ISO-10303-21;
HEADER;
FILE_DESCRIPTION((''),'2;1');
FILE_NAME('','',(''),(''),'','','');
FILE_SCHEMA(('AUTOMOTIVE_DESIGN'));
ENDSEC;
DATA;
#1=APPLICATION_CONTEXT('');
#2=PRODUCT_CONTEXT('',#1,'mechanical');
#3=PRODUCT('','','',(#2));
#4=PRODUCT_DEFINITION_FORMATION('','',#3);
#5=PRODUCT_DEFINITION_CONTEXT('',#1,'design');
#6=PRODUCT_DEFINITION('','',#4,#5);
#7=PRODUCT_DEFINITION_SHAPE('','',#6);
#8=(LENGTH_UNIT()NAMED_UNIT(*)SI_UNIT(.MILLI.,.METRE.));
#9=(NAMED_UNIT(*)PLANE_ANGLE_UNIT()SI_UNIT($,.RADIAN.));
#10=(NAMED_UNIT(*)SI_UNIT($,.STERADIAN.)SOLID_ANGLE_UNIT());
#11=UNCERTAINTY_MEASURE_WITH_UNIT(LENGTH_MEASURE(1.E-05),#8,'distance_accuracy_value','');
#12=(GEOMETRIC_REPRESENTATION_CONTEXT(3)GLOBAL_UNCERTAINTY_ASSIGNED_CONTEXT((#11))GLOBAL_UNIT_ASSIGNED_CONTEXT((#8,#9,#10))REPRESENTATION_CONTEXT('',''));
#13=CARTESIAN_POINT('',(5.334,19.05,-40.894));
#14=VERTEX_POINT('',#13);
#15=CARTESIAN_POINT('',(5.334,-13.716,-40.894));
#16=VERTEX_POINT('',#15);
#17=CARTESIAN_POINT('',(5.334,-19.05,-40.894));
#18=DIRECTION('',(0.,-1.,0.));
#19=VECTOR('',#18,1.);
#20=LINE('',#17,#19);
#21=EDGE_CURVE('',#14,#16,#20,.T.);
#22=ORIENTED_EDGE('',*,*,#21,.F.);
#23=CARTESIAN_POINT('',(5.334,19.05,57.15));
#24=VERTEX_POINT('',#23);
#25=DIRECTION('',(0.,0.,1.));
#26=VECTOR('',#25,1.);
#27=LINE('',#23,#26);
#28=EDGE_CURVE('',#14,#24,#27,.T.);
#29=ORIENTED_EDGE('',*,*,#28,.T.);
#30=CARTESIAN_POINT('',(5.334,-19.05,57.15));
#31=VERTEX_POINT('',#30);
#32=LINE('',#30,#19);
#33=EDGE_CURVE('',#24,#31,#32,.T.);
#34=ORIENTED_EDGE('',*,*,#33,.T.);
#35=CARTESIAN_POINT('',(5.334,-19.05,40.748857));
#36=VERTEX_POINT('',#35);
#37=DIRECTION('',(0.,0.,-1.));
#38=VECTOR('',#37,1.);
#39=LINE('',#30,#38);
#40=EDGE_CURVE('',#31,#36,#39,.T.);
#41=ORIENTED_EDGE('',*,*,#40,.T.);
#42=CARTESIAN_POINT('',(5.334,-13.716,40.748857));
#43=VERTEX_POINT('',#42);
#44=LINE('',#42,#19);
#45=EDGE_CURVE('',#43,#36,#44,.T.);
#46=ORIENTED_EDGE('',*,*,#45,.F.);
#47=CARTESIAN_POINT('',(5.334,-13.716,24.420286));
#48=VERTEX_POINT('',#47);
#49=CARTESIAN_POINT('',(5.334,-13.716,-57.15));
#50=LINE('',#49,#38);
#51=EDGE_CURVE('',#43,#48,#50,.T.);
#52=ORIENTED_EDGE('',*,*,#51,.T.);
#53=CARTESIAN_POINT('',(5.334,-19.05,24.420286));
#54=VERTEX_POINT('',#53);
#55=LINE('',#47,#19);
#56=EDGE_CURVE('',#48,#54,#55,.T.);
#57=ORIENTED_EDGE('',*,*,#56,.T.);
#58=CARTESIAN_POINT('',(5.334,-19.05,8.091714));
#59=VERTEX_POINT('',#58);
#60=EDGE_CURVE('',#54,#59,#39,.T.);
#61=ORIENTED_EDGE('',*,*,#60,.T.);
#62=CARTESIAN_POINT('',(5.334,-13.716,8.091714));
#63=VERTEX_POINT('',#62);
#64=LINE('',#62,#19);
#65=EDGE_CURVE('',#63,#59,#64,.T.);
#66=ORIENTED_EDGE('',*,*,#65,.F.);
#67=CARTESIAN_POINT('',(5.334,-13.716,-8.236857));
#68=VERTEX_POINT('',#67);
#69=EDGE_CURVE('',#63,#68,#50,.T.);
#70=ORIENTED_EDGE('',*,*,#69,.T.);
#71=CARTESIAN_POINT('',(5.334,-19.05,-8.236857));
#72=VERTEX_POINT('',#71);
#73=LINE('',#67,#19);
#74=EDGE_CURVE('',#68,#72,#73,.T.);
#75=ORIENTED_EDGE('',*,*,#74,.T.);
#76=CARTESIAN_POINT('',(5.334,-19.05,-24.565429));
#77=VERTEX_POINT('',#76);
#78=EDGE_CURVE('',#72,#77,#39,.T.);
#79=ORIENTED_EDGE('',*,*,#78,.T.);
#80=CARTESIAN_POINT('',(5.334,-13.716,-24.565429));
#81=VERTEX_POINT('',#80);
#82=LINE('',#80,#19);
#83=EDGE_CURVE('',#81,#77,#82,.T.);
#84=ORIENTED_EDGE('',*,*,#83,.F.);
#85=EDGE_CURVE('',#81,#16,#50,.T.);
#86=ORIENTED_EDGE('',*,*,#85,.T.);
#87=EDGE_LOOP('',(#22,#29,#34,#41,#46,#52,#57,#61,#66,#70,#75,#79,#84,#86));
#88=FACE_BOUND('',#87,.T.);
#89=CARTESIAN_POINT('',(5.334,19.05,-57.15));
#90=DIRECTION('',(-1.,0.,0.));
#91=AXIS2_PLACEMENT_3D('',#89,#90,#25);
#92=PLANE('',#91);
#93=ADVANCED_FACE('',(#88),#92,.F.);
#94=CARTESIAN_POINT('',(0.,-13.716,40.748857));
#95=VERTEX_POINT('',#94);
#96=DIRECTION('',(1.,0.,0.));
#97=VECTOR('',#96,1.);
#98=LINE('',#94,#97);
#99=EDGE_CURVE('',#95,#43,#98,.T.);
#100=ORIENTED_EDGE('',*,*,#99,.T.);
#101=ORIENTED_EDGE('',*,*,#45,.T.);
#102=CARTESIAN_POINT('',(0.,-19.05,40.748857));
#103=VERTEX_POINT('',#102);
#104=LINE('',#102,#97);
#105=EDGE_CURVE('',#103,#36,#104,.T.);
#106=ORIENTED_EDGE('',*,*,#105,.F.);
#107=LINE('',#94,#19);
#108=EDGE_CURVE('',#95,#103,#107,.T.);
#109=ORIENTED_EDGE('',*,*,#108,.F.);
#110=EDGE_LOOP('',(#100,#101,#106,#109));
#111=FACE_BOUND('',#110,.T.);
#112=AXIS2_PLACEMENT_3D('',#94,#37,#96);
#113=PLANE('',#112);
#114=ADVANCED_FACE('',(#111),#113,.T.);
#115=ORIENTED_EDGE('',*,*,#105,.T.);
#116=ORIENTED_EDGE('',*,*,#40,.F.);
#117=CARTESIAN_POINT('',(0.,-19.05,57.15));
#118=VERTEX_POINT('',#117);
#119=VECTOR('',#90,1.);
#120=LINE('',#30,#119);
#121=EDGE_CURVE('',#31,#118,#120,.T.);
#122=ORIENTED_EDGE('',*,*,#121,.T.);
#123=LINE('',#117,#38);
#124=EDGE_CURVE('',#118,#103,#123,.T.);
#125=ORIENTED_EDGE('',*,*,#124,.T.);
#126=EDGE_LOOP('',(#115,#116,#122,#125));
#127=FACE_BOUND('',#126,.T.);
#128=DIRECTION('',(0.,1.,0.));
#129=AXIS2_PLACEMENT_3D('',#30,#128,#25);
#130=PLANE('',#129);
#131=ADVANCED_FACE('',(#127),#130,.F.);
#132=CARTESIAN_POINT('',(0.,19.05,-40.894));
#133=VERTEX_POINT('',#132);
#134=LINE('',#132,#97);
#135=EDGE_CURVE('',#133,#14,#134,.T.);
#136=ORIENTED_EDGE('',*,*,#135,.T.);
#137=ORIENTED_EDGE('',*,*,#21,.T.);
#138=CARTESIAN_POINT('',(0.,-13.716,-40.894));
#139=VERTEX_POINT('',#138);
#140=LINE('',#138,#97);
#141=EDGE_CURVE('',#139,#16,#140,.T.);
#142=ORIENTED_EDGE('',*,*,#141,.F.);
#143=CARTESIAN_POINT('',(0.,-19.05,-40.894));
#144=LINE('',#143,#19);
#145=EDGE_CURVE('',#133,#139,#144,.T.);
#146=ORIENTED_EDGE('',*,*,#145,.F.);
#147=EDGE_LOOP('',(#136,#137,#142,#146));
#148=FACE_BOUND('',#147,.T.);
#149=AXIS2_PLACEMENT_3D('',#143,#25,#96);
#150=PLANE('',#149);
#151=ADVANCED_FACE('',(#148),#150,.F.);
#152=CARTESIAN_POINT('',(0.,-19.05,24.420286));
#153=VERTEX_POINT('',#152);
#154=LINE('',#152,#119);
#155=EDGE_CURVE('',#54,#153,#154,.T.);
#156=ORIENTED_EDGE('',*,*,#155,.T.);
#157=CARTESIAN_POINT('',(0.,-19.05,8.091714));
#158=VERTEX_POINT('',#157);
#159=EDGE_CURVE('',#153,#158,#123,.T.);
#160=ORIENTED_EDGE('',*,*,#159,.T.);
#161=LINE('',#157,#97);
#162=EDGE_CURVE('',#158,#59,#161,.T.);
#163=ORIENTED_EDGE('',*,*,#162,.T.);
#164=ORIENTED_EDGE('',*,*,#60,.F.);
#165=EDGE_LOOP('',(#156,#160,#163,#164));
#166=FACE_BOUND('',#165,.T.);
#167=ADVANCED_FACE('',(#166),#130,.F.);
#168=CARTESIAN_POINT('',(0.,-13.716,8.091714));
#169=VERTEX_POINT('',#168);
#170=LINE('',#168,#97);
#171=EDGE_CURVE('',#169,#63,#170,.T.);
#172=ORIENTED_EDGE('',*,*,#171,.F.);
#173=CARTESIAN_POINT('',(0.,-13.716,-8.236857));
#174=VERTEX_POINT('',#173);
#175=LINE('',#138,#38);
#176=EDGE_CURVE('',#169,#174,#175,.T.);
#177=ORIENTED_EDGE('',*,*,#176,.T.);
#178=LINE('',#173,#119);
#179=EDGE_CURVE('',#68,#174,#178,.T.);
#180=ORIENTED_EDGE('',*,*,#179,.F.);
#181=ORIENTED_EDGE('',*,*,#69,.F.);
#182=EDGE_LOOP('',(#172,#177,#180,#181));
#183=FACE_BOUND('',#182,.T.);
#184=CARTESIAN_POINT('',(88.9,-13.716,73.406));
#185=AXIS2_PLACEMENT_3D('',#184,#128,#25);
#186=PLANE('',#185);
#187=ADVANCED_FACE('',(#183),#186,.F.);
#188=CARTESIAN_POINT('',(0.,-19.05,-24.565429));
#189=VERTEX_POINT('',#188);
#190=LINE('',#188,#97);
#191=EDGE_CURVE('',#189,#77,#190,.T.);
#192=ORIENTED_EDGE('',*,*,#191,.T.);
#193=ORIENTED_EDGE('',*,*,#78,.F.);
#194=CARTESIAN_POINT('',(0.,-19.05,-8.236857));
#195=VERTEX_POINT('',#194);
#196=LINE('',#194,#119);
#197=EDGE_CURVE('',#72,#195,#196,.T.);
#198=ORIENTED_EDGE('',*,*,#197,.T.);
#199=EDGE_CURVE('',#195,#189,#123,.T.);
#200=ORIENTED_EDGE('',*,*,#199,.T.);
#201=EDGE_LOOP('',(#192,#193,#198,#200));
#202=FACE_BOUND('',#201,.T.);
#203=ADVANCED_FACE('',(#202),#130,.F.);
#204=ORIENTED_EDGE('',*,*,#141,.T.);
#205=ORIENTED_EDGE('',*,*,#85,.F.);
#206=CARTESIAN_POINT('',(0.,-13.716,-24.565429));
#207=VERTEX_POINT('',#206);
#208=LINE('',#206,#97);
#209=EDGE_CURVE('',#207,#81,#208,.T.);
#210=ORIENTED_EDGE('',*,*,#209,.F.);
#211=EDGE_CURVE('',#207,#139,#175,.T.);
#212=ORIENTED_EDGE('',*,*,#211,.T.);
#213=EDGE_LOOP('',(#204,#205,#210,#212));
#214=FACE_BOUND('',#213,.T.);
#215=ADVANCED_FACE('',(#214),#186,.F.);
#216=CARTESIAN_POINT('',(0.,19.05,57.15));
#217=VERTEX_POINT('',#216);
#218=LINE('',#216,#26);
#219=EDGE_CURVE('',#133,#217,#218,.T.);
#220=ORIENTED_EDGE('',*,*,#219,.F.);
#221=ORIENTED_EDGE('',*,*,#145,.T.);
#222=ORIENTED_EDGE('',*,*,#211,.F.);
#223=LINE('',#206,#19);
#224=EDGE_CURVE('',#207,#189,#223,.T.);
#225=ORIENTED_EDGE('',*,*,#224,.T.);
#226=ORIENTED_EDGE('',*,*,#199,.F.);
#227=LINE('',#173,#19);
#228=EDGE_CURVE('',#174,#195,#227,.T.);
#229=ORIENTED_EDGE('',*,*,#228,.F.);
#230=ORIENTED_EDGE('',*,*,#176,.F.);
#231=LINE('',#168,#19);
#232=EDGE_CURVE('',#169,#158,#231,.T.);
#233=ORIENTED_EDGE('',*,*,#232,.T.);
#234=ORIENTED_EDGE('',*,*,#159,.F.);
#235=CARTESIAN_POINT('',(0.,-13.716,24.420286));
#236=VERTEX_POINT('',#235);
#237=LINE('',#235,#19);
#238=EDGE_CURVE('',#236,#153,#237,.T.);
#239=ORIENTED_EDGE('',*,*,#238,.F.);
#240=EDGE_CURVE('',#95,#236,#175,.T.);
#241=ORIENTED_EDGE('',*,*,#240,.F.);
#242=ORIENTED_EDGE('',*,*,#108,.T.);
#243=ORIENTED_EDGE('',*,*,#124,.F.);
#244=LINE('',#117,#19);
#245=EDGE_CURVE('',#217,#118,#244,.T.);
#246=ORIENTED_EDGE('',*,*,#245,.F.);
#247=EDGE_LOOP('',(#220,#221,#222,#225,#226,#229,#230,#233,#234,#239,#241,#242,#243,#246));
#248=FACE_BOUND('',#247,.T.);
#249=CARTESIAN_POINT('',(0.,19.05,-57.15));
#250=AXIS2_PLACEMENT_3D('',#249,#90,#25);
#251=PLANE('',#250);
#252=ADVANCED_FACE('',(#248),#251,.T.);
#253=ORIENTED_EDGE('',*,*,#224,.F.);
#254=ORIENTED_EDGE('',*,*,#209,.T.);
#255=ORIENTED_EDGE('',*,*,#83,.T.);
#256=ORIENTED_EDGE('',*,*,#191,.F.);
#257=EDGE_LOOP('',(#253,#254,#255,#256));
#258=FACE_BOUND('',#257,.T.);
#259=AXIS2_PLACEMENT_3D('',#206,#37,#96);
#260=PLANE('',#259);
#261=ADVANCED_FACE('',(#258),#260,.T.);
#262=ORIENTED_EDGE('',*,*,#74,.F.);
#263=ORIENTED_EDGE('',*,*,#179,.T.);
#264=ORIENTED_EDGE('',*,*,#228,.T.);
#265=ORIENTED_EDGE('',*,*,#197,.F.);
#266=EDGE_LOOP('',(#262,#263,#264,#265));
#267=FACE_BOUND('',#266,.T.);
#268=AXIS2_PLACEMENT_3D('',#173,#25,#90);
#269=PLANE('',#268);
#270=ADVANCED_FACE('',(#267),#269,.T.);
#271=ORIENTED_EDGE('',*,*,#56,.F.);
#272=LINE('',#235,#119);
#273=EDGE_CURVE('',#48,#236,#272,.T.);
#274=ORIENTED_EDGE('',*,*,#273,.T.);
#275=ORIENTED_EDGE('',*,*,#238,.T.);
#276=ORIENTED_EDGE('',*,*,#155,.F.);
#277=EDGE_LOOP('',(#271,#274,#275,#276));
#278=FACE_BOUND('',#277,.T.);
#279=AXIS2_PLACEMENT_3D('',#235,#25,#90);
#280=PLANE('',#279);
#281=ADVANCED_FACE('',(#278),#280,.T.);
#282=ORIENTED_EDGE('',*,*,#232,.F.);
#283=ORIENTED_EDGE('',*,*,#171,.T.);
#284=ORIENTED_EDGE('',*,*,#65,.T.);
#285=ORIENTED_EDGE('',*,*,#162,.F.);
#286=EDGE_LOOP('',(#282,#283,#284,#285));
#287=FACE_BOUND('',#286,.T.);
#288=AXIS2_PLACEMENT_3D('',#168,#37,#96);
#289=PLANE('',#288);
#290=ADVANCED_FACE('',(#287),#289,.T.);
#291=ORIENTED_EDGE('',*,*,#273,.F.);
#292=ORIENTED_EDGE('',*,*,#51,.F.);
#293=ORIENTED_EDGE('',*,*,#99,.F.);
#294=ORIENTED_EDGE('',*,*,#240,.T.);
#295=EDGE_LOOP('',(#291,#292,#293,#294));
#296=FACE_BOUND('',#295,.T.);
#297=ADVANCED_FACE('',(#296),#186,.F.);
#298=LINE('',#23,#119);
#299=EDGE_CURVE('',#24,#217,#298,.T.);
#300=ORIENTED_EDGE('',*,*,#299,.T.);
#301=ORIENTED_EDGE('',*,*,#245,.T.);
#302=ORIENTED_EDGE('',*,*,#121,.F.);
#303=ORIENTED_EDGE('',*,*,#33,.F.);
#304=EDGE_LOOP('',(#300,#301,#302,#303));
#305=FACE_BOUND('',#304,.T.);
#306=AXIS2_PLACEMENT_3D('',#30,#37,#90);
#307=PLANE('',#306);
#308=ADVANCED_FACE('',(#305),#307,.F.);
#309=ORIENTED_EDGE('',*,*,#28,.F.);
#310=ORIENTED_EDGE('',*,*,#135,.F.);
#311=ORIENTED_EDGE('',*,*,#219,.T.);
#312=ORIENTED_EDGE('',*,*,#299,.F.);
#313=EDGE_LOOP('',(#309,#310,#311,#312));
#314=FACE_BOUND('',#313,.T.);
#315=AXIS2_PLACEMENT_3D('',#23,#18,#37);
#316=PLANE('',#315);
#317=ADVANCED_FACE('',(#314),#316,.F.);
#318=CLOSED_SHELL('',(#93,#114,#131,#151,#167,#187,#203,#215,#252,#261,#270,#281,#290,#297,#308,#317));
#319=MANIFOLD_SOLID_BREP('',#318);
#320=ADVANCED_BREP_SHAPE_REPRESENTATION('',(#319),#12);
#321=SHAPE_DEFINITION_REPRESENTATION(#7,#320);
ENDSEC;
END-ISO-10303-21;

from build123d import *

# Parameters (mm, degrees)
SKETCH2_W           = 114.3
SKETCH2_H           = 38.1
BOSS_EXTRUDE2_DEPTH = 5.334
SKETCH3_W           = 16.256
SKETCH3_H           = 38.1
CUT_EXTRUDE3_DEPTH  = 61.477074632
CAVITY1_START       = -19.05
CAVITY1_OUTLINE_W   = 5.334
CAVITY1_OUTLINE_H   = 16.328571429
CAVITY1_DEPTH       = 5.334


# Read off the part's stored shape, not the designer's step: Cavity1
with BuildPart() as part:
    # Sketch2 → Boss-Extrude2 (new body)
    with BuildSketch(Plane(origin=(0, 0, 0), x_dir=(0, 0, -1), z_dir=(1, 0, 0))):
        Rectangle(SKETCH2_W, SKETCH2_H)
    extrude(amount=BOSS_EXTRUDE2_DEPTH)

    # Sketch3 → Cut-Extrude3 (cut, through all)
    with BuildSketch(Plane(origin=(5.334, 0, 0), x_dir=(0, 0, -1), z_dir=(1, 0, 0))):
        with Locations((49.022, 0)):
            Rectangle(SKETCH3_W, SKETCH3_H)
    extrude(amount=-CUT_EXTRUDE3_DEPTH, mode=Mode.SUBTRACT)

    # Cavity1 outline → Cavity1 (cut)
    with BuildSketch(Plane(origin=(0, 0, 0), x_dir=(1, 0, 0), z_dir=(0, 1, 0)).offset(CAVITY1_START)):
        with Locations((2.667, 32.729714286)):
            Rectangle(CAVITY1_OUTLINE_W, CAVITY1_OUTLINE_H)
        with Locations((2.667, 0.072571428)):
            Rectangle(CAVITY1_OUTLINE_W, CAVITY1_OUTLINE_H)
        with Locations((2.667, -32.584571428)):
            Rectangle(CAVITY1_OUTLINE_W, CAVITY1_OUTLINE_H)
    extrude(amount=CAVITY1_DEPTH, mode=Mode.SUBTRACT)


solid = part.part
